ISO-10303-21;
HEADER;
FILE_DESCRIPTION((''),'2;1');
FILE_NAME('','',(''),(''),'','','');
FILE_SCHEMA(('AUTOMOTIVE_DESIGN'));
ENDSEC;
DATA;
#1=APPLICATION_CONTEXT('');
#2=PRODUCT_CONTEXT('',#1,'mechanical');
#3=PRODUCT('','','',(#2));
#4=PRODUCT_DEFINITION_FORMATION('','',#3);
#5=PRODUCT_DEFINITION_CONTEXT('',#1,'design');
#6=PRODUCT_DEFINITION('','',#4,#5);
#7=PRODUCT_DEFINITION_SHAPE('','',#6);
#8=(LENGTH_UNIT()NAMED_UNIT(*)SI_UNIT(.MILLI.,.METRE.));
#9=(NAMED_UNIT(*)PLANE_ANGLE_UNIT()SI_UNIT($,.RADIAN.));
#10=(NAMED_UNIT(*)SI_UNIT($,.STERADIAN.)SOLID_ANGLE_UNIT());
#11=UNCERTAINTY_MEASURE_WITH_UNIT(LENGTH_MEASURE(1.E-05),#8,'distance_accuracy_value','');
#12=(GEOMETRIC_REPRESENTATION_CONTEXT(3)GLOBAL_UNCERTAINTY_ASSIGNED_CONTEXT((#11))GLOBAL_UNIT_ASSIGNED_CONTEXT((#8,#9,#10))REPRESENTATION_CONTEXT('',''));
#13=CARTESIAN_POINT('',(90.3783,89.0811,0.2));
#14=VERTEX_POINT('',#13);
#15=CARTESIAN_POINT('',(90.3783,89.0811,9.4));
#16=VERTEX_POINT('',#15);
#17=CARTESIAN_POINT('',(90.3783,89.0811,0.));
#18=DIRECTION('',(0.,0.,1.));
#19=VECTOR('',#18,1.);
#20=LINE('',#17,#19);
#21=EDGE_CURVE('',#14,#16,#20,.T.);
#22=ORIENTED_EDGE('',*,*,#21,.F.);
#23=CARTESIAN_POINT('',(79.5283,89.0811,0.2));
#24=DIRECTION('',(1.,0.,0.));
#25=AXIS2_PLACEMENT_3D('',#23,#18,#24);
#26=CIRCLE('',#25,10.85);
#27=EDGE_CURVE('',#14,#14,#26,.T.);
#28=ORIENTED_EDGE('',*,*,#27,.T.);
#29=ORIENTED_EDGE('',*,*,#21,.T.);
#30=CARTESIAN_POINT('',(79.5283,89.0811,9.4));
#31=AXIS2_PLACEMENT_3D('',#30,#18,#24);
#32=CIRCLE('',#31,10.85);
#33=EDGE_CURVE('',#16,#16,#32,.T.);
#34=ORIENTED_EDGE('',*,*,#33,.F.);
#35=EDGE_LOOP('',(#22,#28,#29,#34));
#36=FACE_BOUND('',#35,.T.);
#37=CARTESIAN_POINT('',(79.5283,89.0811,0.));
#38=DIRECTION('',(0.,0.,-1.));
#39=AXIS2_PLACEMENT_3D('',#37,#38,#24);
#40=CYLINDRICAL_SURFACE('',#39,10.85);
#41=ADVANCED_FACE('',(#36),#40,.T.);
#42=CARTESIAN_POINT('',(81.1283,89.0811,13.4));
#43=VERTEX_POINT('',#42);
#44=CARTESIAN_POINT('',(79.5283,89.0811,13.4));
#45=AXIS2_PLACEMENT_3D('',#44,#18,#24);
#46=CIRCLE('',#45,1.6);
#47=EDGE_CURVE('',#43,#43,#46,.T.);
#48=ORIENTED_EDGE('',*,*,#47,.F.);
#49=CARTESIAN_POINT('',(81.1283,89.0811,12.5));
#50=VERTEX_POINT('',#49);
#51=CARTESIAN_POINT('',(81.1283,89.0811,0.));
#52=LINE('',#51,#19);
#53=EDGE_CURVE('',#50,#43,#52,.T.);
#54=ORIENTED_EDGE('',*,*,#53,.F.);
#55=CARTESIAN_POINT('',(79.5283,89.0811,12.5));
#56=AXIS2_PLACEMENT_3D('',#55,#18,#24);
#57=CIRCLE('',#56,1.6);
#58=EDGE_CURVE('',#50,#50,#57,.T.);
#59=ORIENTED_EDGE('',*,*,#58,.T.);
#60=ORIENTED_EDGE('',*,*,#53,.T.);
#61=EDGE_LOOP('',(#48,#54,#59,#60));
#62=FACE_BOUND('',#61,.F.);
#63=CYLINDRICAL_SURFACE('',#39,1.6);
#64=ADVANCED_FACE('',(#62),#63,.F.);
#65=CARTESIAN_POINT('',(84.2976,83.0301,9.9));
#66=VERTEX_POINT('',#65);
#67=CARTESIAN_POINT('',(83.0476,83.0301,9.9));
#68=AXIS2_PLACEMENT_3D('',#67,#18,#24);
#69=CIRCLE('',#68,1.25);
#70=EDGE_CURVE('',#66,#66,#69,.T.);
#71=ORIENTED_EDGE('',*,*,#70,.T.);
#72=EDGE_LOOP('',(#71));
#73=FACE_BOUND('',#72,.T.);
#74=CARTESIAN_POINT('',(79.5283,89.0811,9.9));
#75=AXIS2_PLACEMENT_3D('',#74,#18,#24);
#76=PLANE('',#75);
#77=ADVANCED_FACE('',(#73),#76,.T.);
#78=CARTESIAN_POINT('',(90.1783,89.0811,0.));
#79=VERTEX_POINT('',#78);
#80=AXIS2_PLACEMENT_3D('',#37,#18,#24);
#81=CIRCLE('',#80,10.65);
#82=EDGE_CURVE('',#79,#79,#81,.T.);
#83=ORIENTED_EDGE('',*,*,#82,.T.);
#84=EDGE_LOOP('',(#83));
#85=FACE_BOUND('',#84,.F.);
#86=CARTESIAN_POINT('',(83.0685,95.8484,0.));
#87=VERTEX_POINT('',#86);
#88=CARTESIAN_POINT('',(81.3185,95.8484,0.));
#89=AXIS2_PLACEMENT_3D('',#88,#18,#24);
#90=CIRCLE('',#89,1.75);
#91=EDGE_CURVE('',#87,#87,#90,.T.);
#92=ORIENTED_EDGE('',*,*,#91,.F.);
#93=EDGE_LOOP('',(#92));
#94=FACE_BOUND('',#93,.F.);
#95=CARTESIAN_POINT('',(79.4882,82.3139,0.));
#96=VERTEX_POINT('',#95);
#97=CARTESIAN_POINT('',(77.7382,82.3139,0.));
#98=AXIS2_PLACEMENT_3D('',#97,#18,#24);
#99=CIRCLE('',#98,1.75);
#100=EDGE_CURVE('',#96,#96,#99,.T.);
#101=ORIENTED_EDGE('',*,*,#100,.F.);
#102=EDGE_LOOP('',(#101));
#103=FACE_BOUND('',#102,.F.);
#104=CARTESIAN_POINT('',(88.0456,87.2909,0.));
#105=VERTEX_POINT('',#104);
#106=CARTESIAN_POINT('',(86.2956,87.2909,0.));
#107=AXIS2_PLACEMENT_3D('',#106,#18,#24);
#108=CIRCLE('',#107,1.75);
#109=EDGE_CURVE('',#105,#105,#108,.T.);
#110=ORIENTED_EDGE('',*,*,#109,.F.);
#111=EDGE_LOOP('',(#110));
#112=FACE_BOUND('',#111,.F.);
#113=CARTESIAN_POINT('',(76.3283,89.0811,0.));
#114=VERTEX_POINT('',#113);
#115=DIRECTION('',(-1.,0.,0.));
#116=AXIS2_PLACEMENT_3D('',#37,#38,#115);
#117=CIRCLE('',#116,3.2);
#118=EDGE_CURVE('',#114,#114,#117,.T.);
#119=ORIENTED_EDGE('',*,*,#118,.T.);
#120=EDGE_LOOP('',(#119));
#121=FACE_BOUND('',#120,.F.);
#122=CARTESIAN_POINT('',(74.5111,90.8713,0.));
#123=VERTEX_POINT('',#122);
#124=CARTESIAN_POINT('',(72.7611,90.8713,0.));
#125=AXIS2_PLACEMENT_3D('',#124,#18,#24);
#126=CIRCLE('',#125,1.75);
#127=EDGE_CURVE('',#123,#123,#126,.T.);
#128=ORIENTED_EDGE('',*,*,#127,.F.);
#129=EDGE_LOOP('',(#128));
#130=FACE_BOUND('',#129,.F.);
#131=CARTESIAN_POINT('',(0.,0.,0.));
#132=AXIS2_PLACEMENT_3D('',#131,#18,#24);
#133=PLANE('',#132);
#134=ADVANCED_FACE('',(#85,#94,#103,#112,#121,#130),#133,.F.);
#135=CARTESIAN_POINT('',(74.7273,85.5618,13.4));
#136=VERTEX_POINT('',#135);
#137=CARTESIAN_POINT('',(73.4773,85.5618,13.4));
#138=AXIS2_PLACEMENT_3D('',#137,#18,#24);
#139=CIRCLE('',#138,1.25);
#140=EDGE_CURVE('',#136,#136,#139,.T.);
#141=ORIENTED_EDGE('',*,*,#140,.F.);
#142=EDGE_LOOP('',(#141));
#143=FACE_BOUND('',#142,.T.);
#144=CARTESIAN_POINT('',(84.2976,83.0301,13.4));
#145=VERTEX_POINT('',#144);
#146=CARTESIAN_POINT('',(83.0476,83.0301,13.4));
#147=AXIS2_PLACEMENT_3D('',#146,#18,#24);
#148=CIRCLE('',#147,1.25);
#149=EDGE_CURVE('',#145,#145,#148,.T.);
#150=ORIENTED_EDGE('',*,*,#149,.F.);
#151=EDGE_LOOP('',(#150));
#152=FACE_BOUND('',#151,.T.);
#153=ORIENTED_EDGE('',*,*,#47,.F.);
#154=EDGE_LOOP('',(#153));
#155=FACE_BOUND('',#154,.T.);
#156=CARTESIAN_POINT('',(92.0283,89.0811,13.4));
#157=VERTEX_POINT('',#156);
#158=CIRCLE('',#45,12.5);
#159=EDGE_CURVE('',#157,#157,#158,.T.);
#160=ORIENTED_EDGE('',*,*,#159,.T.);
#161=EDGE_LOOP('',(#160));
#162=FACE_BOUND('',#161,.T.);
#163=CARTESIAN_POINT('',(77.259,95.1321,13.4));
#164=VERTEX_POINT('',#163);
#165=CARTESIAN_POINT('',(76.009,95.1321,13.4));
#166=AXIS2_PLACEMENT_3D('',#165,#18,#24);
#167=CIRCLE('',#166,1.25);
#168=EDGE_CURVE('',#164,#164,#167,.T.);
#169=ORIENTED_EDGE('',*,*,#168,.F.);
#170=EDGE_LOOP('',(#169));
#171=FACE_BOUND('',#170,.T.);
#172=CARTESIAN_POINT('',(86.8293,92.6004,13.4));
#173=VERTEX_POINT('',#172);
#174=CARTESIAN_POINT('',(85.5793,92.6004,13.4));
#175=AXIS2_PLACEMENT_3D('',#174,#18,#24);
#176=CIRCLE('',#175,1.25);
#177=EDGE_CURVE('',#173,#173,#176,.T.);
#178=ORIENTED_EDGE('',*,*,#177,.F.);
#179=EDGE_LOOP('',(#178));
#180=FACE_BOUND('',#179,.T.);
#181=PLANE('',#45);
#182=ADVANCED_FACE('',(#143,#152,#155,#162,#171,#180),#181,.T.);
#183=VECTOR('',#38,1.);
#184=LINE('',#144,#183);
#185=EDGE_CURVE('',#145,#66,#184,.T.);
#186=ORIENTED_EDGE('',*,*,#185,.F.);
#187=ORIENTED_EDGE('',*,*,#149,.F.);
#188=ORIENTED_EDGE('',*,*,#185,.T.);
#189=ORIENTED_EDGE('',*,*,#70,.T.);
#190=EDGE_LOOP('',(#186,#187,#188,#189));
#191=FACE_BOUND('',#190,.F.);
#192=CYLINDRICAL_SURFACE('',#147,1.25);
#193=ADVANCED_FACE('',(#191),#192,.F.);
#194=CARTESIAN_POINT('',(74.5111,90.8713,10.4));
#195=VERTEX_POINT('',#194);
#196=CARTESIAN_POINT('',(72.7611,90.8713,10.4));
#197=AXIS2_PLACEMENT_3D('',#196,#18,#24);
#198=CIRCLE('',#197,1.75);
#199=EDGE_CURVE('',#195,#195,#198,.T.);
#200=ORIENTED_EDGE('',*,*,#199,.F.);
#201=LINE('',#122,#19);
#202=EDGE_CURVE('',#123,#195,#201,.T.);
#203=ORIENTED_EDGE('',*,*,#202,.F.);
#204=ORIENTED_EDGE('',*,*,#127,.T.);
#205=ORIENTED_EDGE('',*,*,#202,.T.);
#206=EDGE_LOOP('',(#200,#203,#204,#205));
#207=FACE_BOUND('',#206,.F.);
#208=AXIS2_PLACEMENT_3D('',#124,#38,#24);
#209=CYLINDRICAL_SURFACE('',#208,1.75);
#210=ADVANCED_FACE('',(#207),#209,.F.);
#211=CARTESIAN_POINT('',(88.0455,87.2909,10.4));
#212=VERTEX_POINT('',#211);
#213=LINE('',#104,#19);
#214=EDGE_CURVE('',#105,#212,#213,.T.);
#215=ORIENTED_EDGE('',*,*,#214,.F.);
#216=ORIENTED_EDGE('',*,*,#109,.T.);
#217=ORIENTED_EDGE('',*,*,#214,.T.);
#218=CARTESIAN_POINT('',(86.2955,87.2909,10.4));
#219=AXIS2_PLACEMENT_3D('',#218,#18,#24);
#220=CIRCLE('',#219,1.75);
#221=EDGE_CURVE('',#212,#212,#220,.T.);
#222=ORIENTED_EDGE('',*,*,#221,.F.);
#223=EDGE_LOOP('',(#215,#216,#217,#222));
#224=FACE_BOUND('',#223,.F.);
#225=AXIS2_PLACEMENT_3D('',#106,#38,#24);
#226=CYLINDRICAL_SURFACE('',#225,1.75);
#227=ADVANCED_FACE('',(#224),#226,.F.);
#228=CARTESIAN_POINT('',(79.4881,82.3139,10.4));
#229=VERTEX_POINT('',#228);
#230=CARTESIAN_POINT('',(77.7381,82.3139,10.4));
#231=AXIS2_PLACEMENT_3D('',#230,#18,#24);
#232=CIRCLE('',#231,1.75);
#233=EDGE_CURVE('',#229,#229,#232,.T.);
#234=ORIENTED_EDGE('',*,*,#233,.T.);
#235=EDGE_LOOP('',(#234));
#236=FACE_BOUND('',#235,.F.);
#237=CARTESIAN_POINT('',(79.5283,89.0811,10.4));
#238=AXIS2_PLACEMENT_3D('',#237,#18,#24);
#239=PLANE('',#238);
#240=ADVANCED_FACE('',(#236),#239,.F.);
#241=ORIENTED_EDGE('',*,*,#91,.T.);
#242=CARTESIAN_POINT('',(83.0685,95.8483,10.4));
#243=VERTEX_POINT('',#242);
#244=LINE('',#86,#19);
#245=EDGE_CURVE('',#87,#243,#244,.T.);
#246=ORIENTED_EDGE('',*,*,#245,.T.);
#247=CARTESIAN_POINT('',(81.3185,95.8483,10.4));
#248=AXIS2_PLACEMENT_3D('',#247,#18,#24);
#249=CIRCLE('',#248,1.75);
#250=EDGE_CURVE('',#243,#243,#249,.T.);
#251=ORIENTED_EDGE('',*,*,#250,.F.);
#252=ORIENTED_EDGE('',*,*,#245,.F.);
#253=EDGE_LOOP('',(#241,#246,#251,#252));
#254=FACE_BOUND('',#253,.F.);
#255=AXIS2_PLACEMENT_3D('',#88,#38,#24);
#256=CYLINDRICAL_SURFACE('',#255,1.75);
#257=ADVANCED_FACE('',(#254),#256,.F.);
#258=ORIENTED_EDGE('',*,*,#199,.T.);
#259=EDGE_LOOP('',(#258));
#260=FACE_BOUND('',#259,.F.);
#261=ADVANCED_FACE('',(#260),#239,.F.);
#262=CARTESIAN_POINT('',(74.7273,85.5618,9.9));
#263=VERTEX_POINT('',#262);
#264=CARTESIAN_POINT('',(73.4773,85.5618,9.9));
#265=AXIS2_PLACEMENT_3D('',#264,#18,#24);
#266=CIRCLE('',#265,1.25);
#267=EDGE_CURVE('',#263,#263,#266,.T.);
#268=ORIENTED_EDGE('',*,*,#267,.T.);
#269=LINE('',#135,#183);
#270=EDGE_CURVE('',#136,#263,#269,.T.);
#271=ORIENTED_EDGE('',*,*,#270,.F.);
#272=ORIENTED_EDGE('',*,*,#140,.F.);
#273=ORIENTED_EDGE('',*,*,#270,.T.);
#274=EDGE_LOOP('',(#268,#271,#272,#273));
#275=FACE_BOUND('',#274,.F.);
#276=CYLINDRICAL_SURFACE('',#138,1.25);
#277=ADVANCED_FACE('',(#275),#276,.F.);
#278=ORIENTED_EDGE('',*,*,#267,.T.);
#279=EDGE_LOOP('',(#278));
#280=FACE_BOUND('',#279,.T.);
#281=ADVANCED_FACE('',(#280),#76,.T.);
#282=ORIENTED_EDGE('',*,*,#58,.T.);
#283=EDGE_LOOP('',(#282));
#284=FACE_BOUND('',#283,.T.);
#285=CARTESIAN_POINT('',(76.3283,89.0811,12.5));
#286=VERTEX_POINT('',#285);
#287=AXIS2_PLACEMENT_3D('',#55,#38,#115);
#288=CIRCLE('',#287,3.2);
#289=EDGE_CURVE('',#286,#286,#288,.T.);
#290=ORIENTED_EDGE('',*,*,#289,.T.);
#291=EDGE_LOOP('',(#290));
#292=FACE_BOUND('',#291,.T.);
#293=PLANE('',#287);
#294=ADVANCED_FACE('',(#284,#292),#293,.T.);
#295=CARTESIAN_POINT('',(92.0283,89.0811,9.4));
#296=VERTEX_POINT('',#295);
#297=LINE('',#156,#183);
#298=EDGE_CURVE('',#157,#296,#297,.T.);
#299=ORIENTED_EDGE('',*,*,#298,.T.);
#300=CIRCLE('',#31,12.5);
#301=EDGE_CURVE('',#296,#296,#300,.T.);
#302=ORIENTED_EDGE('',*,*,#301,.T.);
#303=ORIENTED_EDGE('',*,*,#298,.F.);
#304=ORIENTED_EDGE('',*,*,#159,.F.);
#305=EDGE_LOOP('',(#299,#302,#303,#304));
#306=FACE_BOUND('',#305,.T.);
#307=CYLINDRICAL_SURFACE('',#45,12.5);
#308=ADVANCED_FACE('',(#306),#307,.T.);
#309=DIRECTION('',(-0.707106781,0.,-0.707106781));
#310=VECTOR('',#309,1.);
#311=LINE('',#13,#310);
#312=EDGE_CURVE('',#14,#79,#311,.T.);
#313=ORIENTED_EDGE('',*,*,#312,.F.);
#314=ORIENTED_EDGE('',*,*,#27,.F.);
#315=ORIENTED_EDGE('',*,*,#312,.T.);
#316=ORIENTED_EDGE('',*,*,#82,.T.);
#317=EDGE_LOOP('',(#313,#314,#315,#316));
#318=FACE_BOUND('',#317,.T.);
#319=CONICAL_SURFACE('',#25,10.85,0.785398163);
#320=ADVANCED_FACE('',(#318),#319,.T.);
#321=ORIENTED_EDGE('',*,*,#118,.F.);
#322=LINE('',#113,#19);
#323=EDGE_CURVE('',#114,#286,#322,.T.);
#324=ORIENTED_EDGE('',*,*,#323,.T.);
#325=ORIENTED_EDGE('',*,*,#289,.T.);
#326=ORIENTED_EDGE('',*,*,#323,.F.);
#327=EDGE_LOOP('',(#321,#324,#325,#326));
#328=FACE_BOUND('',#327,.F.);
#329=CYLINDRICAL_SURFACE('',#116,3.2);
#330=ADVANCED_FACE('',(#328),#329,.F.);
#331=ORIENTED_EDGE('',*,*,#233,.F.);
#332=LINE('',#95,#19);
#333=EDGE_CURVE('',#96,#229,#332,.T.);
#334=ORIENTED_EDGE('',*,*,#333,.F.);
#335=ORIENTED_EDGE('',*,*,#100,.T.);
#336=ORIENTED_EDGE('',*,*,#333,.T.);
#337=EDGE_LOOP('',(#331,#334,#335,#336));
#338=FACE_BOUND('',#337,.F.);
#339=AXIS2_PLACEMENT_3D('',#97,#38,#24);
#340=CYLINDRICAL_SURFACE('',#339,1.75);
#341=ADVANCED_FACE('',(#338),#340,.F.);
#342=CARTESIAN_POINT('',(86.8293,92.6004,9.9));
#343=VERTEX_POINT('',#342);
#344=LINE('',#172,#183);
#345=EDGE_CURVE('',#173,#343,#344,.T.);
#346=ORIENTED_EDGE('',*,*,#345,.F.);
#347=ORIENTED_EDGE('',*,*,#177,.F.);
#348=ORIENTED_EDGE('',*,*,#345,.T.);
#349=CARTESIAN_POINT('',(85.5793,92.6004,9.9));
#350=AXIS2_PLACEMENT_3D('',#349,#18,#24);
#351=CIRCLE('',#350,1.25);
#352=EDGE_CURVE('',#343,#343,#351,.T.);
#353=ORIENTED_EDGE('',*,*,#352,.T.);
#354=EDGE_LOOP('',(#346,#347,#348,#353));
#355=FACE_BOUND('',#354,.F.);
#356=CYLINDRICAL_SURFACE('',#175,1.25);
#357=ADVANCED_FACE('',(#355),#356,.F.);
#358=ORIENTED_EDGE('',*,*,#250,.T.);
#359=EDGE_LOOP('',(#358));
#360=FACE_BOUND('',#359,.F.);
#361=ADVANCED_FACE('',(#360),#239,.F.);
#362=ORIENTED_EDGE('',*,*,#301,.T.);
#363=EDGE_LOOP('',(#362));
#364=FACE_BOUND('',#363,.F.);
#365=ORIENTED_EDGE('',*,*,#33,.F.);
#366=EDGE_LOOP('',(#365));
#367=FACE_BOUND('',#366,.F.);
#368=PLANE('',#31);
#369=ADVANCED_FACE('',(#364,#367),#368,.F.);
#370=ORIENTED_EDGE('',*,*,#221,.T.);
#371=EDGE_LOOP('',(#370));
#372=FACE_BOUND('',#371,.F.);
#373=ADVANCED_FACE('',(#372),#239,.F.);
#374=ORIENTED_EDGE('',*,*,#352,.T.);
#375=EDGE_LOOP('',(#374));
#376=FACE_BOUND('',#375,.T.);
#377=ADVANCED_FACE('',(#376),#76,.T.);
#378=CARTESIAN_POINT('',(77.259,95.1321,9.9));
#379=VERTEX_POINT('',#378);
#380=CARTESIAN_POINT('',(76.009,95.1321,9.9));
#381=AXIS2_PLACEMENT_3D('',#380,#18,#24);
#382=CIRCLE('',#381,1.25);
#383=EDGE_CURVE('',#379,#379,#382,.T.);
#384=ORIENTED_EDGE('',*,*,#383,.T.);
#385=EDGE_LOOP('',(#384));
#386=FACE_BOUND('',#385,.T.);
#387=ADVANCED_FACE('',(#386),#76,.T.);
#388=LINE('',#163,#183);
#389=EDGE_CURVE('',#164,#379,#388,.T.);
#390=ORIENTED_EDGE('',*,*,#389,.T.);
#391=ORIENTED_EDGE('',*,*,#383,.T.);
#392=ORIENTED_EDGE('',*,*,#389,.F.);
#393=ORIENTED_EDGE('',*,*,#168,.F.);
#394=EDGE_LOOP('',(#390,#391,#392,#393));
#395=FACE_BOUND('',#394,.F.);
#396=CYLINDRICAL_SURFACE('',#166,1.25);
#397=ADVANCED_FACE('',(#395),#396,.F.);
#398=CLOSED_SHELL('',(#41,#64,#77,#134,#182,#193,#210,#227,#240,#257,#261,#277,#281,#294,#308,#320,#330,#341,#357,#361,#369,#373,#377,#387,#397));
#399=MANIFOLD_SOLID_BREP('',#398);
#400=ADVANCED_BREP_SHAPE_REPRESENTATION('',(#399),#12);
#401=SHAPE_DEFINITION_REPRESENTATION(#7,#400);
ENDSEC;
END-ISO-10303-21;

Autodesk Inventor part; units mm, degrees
ref_plane "YZ Plane" through (0, 0, 0) normal (1, 0, 0) x (0, 1, 0)
ref_plane "XZ Plane" through (0, 0, 0) normal (0, 1, 0) x (-1, 0, 0)
ref_plane "XY Plane" through (0, 0, 0) normal (0, 0, 1) x (1, 0, 0)
sketch "스케치1" plane through (0, 0, 0) normal (0, 0, 1) x (1, 0, 0)
  circle A0 centre (77.7382, 82.3139) radius 1.75 projected
  circle A1 centre (72.7611, 90.8713) radius 1.75 projected
  circle A2 centre (86.2956, 87.2909) radius 1.75 projected
  circle A3 centre (81.3185, 95.8484) radius 1.75 projected
  circle A4 centre (79.5283, 89.0811) radius 11.15 projected
  circle A5 centre (79.5283, 89.0811) radius 10.85
  circle A6 centre (79.5283, 89.0811) radius 1.6
  circle A7 centre (79.5283, 89.0811) radius 2.8
  circle A8 centre (79.5283, 89.0811) radius 2.5 projected
  point P0 (0, 0)
  dimension "d0" = 0.3
  dimension "d3" = 3.2
extrude "돌출1" add sketch "스케치1" along normal blind 13.4 contours A5 | A7 | A8
sketch "스케치2" plane through (79.5283, 89.0811, 13.4) normal (0, 0, 1) x (1, 0, 0)
  circle A0 centre (0, 0) radius 10.85 projected
  circle A1 centre (0, 0) radius 12.5
  dimension "d4" = 25
extrude "돌출2" add sketch "스케치2" against normal blind 4
chamfer "모따기1" distance 0.2 angle 45 1 edges at (68.6783, 89.0811, 0)
sketch "스케치3" plane through (79.5283, 89.0811, 0) normal (0, 0, -1) x (-1, 0, 0)
  circle A0 centre (0, 0) radius 1.6 projected
  circle A1 centre (0, 0) radius 10.65 projected
  circle A2 centre (0, 0) radius 3.2
  dimension "d13" = 6.4
extrude "돌출3" cut sketch "스케치3" against normal blind 12.5 contours A2
sketch "스케치5" plane through (79.5283, 89.0811, 13.4) normal (0, 0, 1) x (1, 0, 0)
  circle A0 centre (0, 0) radius 12.5 projected
  circle A1 centre (-1.7902, -6.7672) radius 1.75 projected
  circle A2 centre (-1.7902, -6.7672) radius 1.25
  circle A3 centre (3.5193, -6.051) radius 1.25
  circle A4 centre (6.7672, -1.7902) radius 1.25
  circle A5 centre (6.051, 3.5193) radius 1.25
  circle A6 centre (1.7902, 6.7672) radius 1.25
  circle A7 centre (-3.5193, 6.051) radius 1.25
  circle A8 centre (-6.7672, 1.7902) radius 1.25
  circle A9 centre (-6.051, -3.5193) radius 1.25
  dimension "d18" = 2.5
  dimension "d21" = 360
extrude "돌출5" cut sketch "스케치5" against normal blind 3.5 contours A3 | A5 | A7 | A9
sketch "스케치4" plane through (79.5283, 89.0811, 13.4) normal (0, 0, 1) x (1, 0, 0)
  circle A0 centre (1.7902, 6.7672) radius 1.75 projected
  circle A1 centre (6.7672, -1.7902) radius 1.75 projected
  circle A2 centre (-6.7672, 1.7902) radius 1.75 projected
  circle A3 centre (-1.7902, -6.7672) radius 1.75 projected
extrude "돌출4" add sketch "스케치4" against normal blind 3
properties part number "gear_support"
